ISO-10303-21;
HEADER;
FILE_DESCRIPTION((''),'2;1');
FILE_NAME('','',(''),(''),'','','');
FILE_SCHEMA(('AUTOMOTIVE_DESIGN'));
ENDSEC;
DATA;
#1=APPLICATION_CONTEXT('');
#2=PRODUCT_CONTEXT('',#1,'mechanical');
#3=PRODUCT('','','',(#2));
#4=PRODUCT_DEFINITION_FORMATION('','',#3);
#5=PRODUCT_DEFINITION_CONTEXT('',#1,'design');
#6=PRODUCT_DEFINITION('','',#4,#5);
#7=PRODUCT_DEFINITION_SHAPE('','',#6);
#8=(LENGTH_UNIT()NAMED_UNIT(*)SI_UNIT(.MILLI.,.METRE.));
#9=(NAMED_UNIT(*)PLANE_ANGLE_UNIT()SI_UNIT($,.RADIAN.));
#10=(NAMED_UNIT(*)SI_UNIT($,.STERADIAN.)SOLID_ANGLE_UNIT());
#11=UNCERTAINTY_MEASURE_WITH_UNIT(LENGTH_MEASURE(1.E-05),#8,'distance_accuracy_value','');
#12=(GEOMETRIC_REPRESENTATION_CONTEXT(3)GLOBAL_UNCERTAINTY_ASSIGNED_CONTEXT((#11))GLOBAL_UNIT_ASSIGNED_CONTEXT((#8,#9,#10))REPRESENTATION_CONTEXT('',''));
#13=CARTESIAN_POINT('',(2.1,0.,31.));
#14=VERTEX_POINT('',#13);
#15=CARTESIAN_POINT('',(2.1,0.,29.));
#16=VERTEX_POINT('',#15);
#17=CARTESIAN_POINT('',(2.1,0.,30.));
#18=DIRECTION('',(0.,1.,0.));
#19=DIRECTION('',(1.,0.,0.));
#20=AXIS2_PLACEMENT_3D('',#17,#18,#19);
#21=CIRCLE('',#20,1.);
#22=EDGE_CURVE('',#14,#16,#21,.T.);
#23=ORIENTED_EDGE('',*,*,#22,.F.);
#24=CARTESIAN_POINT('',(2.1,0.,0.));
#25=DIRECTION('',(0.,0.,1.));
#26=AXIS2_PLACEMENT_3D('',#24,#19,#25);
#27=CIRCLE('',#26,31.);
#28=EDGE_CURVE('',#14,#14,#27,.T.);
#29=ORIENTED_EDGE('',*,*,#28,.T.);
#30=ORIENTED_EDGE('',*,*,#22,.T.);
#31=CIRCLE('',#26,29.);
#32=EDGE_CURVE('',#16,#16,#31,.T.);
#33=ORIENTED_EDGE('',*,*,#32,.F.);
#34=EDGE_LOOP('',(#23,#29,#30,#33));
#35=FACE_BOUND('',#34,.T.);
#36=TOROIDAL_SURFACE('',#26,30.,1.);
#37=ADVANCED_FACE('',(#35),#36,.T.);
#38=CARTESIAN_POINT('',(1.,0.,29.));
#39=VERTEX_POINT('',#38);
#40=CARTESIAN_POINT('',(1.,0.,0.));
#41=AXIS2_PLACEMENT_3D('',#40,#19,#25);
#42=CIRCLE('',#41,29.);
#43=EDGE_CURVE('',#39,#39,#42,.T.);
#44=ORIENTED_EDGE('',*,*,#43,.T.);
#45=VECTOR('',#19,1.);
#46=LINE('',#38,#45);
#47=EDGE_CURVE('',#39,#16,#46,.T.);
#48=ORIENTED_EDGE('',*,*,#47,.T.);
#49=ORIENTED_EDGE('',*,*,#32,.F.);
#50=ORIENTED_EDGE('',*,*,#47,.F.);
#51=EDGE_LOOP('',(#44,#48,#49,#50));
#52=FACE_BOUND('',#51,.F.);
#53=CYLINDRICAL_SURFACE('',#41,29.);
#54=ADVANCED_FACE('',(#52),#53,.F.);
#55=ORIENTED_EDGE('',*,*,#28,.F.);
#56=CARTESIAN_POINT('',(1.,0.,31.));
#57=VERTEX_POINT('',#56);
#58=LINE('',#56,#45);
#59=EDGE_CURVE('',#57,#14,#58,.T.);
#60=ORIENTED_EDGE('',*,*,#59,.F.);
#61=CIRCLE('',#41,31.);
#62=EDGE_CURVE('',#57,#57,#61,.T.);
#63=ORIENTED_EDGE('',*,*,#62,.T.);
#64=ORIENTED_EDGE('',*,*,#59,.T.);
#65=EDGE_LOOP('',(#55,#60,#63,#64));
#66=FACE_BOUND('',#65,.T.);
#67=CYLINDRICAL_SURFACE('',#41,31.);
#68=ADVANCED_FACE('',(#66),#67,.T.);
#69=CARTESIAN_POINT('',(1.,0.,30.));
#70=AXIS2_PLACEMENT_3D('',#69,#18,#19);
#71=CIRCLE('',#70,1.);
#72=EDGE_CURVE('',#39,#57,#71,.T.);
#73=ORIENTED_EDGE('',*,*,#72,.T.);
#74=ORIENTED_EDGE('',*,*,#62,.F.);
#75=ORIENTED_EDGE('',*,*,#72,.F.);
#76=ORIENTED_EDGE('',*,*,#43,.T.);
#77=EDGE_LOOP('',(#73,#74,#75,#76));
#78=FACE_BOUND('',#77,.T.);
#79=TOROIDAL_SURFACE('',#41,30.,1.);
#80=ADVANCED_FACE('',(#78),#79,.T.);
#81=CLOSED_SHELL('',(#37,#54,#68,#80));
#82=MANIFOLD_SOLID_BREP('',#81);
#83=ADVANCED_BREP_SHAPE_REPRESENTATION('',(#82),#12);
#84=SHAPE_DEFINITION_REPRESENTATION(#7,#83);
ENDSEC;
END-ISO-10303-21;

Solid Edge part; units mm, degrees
sketch "Sketch1" plane through (0, 0, 0) normal (0, -1, 0) x (1, 0, 0)
  line L0 (1, 31) -> (2.1, 31)
  line L1 (1, 29) -> (2.1, 29)
  arc A0 (1, 29) -> (1, 31) centre (1, 30) cw
  arc A1 (2.1, 31) -> (2.1, 29) centre (2.1, 30) cw
revolve "RevolvedProtrusion1" add sketch "Sketch1" angle 360 about axis through (0, 0, 0) along (1, 0, 0)
